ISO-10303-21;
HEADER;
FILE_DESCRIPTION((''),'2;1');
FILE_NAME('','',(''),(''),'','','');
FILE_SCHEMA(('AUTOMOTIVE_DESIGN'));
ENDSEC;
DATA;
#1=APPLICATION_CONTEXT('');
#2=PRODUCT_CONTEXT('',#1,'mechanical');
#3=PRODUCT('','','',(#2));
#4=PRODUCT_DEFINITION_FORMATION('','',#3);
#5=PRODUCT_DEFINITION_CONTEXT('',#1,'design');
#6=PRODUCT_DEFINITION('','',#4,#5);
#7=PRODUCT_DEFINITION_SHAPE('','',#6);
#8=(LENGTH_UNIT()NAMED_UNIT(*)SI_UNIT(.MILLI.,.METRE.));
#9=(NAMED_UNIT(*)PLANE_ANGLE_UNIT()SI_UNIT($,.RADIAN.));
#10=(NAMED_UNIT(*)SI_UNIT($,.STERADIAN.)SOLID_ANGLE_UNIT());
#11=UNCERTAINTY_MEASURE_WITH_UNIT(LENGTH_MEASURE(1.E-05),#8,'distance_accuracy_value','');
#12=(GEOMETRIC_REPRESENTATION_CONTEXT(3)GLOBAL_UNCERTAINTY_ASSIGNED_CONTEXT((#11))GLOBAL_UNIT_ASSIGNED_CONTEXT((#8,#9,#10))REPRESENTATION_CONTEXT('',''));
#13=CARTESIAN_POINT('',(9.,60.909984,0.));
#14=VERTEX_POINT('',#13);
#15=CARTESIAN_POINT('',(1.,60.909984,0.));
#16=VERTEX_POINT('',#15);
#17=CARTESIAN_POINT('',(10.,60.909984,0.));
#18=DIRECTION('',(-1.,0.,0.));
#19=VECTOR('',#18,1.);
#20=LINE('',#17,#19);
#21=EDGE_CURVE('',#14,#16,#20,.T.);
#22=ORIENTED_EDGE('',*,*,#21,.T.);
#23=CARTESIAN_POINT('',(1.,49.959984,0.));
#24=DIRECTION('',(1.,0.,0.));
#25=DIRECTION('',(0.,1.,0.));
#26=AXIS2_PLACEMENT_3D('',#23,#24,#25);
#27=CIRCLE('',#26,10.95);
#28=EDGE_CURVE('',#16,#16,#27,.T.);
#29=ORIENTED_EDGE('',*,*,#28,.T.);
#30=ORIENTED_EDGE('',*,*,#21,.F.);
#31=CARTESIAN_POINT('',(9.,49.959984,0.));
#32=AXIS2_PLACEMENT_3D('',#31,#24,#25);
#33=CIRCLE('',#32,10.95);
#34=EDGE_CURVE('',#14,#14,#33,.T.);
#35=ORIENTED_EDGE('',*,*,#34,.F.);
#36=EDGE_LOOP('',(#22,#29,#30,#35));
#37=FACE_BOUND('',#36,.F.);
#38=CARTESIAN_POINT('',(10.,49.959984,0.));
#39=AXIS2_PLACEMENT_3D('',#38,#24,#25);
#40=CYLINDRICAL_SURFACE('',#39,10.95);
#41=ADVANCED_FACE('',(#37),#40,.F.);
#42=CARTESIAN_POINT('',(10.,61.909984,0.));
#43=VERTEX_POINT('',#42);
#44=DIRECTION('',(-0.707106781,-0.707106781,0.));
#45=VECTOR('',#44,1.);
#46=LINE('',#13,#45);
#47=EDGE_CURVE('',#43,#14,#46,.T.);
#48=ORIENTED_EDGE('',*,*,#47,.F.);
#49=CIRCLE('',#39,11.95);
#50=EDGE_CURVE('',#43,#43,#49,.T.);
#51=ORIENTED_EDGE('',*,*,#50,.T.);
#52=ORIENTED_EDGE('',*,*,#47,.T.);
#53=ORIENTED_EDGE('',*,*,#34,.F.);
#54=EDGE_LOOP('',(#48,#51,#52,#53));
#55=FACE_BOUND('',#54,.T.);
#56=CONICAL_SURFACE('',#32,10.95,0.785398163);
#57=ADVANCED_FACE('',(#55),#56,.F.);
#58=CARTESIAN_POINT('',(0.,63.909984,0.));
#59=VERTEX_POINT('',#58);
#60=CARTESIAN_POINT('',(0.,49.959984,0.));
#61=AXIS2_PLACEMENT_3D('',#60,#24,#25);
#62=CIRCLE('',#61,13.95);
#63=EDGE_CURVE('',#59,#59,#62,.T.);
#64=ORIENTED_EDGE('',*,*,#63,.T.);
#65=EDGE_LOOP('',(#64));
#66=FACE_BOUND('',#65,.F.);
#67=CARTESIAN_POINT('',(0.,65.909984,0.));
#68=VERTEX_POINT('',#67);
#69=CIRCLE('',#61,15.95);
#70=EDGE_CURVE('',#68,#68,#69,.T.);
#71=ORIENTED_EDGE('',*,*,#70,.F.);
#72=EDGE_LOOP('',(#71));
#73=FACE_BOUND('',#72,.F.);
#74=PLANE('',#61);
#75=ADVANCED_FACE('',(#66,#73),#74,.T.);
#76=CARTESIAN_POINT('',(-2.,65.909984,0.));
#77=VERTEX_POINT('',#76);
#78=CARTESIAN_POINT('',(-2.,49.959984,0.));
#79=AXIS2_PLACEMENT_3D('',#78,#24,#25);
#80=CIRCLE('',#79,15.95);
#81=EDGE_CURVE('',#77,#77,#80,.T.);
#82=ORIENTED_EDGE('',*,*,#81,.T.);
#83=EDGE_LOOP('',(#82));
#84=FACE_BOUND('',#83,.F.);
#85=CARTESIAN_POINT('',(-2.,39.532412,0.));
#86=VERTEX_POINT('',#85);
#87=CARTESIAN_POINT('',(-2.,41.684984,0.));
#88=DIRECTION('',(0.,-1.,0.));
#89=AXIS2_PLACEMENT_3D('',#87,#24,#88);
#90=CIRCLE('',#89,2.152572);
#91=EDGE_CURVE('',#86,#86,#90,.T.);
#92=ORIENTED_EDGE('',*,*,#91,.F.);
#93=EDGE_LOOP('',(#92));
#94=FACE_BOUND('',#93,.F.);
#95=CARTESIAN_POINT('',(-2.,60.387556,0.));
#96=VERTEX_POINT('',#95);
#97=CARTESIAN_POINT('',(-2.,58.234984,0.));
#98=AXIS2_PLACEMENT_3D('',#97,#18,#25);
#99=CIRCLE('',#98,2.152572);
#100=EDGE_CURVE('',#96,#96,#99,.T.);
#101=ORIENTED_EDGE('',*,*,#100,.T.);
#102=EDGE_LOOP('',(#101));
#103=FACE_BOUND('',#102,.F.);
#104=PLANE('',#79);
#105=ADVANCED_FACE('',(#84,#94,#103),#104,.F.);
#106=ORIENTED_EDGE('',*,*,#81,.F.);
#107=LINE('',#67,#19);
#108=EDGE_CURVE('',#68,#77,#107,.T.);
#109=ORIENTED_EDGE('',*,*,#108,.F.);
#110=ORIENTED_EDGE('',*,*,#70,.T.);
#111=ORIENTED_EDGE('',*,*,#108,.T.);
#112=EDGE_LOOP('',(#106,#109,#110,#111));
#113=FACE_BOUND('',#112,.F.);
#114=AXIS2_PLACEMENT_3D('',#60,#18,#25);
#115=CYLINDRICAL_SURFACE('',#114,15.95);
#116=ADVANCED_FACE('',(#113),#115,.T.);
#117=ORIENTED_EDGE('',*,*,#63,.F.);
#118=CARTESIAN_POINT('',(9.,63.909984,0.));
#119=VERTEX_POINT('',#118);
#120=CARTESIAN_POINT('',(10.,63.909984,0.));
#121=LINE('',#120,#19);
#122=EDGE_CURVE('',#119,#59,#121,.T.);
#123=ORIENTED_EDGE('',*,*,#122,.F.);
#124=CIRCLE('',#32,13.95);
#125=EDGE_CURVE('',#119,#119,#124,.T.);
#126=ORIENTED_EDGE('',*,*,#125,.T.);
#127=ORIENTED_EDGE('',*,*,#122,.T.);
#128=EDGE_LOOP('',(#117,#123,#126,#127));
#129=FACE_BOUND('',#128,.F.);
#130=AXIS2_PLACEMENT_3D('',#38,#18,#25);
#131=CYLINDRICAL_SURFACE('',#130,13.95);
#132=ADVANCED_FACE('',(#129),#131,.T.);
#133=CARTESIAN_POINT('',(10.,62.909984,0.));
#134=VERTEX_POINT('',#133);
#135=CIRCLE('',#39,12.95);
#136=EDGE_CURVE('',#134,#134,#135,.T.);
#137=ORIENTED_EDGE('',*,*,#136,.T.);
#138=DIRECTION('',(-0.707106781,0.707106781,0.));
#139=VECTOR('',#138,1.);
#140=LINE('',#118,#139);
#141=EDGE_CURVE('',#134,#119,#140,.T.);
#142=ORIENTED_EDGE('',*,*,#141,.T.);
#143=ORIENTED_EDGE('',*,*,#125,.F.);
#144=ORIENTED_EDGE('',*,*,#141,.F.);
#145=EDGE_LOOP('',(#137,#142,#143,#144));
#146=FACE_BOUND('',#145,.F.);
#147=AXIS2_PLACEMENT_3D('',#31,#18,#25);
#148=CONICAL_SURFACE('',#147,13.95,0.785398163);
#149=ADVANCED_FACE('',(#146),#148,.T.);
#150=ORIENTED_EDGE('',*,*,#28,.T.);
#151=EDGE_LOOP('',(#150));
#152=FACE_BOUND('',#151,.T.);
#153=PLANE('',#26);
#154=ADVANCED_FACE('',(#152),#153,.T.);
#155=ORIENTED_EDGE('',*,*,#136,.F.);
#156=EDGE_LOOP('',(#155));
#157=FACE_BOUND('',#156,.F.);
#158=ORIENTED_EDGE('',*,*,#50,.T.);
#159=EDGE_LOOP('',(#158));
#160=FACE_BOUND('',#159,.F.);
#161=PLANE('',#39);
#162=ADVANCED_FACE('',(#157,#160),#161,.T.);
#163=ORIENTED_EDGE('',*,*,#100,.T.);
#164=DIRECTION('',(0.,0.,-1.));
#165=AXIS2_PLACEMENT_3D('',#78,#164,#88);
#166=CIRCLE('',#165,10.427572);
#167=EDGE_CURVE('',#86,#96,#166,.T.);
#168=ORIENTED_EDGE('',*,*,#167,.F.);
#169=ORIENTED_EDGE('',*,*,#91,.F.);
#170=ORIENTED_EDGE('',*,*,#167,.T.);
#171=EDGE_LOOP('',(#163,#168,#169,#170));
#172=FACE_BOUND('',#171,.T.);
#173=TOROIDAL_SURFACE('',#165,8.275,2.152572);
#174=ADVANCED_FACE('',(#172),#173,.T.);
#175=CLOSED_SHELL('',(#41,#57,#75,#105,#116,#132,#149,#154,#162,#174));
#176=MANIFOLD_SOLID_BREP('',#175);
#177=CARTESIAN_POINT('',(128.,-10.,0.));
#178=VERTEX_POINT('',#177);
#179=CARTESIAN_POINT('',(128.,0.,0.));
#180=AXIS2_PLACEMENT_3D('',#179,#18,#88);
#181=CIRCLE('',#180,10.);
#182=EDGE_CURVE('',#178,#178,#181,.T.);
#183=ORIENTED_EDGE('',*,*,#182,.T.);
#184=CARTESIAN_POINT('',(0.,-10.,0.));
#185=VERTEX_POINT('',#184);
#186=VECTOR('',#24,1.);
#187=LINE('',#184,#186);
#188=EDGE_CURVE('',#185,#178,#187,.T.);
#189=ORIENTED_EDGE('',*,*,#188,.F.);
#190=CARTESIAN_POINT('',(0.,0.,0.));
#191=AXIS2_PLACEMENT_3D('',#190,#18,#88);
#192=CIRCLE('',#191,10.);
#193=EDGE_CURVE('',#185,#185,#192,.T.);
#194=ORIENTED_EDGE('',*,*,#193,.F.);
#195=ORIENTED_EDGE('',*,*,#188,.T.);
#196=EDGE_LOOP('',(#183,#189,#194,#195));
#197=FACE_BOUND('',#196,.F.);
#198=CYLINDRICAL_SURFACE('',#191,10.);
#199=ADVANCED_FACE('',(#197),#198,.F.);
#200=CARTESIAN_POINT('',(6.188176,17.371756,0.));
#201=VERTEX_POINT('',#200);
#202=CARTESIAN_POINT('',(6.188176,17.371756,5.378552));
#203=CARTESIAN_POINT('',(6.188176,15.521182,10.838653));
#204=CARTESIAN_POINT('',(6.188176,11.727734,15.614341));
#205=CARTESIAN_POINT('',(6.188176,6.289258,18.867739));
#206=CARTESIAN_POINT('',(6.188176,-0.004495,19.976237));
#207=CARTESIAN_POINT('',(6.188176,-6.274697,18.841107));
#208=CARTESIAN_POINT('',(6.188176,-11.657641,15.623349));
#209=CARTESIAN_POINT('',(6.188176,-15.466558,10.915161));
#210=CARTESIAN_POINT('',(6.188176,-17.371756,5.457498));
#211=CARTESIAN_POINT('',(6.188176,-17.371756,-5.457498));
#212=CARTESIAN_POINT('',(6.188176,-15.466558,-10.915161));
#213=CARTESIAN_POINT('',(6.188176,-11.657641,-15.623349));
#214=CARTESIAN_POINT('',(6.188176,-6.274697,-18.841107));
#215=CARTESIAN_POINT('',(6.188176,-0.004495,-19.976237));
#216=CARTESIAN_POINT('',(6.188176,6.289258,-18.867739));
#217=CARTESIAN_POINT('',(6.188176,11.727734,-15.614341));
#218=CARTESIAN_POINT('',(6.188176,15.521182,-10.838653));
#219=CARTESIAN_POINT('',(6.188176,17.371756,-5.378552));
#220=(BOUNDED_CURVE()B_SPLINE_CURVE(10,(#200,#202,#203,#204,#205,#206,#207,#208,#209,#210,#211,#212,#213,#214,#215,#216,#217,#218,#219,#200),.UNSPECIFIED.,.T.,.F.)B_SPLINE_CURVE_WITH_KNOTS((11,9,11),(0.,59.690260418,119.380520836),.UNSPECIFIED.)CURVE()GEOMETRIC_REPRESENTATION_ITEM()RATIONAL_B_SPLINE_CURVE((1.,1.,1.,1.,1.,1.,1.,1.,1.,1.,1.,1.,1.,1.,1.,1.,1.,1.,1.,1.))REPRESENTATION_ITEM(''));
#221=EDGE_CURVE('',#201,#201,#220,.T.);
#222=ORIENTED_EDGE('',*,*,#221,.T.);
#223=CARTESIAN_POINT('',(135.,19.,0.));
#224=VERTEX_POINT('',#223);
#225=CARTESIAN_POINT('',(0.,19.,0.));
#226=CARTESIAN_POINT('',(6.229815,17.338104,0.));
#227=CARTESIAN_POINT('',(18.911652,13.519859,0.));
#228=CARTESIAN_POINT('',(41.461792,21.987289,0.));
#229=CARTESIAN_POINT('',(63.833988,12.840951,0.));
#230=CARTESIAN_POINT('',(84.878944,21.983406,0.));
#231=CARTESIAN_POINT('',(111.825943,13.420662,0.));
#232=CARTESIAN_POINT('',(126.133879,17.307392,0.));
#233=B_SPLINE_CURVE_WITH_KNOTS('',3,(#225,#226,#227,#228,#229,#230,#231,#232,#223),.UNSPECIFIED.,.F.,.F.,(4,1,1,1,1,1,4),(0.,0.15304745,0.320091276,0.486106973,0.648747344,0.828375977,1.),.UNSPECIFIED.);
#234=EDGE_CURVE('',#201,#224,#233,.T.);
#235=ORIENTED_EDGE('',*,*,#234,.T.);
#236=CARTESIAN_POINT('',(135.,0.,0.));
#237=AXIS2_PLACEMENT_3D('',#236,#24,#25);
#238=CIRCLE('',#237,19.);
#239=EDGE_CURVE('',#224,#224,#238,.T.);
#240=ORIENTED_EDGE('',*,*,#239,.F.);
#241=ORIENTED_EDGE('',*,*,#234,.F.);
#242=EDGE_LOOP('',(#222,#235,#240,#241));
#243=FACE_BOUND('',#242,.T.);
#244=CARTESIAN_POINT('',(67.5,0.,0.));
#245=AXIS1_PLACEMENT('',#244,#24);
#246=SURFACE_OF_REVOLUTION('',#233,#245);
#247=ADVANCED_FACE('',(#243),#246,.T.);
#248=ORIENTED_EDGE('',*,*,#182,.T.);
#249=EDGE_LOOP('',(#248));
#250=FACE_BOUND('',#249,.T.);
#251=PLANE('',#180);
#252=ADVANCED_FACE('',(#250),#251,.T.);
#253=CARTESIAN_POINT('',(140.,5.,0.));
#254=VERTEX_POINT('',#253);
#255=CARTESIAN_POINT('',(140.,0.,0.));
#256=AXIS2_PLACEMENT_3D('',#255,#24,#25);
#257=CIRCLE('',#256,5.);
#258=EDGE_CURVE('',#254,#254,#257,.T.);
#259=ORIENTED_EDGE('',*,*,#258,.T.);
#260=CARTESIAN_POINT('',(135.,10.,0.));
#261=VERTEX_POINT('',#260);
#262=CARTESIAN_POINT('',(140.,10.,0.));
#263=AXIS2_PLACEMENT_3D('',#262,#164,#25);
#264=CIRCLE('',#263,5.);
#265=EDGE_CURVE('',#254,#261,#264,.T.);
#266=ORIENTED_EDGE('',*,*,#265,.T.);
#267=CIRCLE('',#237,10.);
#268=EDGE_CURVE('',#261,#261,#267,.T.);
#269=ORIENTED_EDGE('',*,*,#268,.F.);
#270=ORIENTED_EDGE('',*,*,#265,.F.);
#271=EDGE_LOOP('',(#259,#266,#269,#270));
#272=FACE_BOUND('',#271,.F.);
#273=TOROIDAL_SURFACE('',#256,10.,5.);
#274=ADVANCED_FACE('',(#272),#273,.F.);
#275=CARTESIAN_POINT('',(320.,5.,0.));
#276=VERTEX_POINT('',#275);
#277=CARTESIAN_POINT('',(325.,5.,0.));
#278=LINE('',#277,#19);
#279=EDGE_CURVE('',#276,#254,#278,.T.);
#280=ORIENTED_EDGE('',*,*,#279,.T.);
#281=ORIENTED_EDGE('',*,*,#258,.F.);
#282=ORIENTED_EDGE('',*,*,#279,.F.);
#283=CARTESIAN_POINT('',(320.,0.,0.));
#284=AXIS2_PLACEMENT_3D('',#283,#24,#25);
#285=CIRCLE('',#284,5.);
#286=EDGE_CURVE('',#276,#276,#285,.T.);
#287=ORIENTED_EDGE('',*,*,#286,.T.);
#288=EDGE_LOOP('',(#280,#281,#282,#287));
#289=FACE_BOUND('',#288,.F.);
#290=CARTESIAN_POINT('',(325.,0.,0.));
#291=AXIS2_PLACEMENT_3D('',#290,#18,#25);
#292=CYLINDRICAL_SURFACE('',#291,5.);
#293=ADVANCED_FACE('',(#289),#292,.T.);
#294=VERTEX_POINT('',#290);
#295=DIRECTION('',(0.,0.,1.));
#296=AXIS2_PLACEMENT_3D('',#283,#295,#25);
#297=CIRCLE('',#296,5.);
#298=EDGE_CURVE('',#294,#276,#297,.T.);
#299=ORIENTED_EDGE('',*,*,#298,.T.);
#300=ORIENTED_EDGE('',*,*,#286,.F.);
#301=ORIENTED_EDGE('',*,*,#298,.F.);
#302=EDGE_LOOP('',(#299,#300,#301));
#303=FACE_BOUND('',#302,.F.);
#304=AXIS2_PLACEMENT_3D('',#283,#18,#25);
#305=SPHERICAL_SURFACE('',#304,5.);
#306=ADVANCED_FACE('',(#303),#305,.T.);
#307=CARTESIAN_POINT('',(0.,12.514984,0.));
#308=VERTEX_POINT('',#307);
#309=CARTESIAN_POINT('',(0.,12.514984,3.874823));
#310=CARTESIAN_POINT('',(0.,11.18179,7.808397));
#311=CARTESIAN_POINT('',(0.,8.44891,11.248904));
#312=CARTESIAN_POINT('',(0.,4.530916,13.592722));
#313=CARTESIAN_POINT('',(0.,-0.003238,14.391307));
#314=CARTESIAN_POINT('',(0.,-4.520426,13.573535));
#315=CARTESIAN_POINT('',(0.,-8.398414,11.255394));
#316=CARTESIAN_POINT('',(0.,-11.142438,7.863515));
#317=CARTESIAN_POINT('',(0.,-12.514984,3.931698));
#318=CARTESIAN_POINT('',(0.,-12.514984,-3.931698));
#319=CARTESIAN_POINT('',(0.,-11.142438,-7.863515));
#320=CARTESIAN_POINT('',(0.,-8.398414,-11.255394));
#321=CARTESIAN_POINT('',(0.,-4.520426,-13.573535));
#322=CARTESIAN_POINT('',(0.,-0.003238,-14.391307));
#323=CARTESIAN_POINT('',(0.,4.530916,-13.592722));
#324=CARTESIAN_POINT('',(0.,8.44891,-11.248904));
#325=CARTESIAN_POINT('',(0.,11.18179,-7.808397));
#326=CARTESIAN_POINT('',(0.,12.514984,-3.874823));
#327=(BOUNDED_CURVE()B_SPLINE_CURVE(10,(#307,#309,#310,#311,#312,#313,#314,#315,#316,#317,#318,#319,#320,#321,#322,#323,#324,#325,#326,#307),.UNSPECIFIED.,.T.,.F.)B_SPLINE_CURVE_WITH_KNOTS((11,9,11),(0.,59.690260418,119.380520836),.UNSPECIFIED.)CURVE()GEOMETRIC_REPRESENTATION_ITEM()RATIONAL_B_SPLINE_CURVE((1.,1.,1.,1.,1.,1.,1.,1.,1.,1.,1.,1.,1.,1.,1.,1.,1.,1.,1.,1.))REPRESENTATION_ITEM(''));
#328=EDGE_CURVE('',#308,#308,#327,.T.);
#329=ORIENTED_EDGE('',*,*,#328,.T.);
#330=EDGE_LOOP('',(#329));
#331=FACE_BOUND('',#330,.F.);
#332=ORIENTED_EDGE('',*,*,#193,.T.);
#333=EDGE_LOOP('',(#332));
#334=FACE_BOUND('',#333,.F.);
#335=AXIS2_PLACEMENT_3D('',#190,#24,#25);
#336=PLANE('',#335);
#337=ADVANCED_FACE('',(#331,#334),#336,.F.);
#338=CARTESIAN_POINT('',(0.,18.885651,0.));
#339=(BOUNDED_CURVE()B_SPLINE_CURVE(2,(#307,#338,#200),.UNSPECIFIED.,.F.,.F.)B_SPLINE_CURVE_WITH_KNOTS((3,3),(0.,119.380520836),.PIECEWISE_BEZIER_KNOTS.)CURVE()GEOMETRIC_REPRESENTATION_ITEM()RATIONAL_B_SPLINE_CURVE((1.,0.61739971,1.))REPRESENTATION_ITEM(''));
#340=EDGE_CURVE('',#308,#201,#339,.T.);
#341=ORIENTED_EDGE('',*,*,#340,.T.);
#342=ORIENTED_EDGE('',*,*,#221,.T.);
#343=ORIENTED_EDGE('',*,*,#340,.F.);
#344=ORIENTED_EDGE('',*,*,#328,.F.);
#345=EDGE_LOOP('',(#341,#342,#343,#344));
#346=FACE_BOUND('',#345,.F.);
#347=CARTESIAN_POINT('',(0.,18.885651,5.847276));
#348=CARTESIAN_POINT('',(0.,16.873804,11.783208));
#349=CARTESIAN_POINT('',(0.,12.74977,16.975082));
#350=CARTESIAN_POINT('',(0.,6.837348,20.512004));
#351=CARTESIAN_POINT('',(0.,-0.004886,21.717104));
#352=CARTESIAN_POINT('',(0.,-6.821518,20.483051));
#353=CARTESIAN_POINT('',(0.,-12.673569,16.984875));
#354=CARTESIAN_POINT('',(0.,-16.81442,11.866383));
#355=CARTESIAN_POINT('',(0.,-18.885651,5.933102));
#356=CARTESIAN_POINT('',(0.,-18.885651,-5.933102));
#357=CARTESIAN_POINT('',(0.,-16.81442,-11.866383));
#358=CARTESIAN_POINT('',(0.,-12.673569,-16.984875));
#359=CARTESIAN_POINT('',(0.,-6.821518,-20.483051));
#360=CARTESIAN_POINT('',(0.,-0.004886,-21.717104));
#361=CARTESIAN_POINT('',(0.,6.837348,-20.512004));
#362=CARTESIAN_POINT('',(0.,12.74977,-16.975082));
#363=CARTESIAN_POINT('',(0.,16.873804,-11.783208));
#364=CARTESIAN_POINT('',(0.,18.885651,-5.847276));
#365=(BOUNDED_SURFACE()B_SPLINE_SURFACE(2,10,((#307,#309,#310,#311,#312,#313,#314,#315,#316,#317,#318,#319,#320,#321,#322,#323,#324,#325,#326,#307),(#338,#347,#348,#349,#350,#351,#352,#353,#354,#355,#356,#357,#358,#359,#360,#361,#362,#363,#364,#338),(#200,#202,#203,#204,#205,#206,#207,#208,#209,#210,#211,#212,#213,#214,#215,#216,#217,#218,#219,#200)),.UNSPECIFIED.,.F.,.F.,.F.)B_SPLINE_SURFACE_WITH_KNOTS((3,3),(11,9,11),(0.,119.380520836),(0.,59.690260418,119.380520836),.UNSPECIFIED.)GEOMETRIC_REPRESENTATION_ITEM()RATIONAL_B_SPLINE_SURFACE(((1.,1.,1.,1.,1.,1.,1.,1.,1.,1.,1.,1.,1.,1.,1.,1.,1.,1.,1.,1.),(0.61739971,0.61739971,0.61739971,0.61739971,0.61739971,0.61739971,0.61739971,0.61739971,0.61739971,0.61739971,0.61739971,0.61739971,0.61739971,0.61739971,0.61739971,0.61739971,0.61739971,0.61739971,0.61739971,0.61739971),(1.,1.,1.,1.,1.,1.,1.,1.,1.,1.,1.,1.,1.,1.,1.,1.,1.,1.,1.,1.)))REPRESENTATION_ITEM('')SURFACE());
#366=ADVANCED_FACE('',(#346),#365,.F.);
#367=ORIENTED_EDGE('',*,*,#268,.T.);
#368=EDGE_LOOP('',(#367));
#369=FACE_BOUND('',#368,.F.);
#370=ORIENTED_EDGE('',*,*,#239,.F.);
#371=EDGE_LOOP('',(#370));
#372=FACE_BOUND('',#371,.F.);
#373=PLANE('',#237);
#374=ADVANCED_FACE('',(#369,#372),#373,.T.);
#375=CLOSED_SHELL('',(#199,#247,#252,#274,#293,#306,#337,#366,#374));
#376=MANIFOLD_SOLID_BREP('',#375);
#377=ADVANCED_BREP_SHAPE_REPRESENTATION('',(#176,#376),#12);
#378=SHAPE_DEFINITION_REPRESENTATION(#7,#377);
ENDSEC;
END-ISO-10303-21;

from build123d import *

# Parameters (mm, degrees)
F2_R      = 5
F3_R      = 10
F4_DEPTH  = 128
F9_R      = 10.95
F10_DEPTH = 9
F11_SIZE  = 1


# Not quite as in the source:
# - a feature of the source that left no trace in its solid (it failed there, or was rolled back) is left out


with BuildPart() as f1:
    # F0 (on Top) → F1 (revolve)
    with BuildSketch(Plane.XY):
        with BuildLine():
            Line((0, 19), (0, 0))
            Line((0, 0), (135, 0))
            Line((135, 0), (325, 0))
            Line((325, 0), (325, 5))
            Line((325, 5), (135, 5))
            Line((135, 5), (135, 19))
            add(Edge.make_bspline(
                [(0, 19), (6.2298148154, 17.3381037384), (18.9116523982, 13.5198586362), (41.4617916208, 21.987289281), (63.8339880536, 12.8409507176), (84.8789443524, 21.983405638), (111.8259427397, 13.4206624804), (126.1338785408, 17.3073923453), (135, 19)],
                knots=[0, 0, 0, 0, 0.1530474504, 0.3200912758, 0.4861069731, 0.6487473436, 0.8283759765, 1, 1, 1, 1], degree=3))
        make_face()
    revolve(axis=Axis((67.5, 0, 0), (1, 0, 0)))

    # F2
    f2_edges = [f1.edges().sort_by_distance(p)[0] for p in [
        (325, -5, 0),
        (135, -5, 0),
        (230, 5, 0),
        (0, -19, 0),
    ]]
    fillet(f2_edges, radius=F2_R)

    # F3 (on face) → F4 (cut)
    with BuildSketch(Plane(origin=(0, 0, 0), x_dir=(0, -1, 0), z_dir=(-1, 0, 0))):
        Circle(F3_R)
    extrude(amount=-F4_DEPTH, mode=Mode.SUBTRACT)


with BuildPart() as f6:
    # F5 (on Top) → F6 (revolve)
    with BuildSketch(Plane.XY):
        Polygon((-2, 49.9599839872), (0, 49.9599839872), (10, 49.9599839872), (10, 63.9099839872), (0, 63.9099839872), (0, 65.9099839872), (-2, 65.9099839872), (-2, 58.2169018066), align=None)
    revolve(axis=Axis((-1, 49.9599839872, 0), (1, 0, 0)))

    # F8: sweep along a path in F5
    with BuildLine(Plane.XY) as f8_path:
        ThreePointArc((-2, 41.7030661678), (-10.2569178194, 49.9599839872), (-2, 58.2169018066))
    # F7 (on face) → F8 (sweep)
    with BuildSketch(Plane(origin=(-2, 0, 0), x_dir=(0, -1, 0), z_dir=(-1, 0, 0))):
        with BuildLine():
            ThreePointArc((-43.8375558203, 0), (-41.6849839872, -2.1525718331), (-39.5324121541, 0))
            ThreePointArc((-39.5324121541, 0), (-41.6849839872, 2.1525718331), (-43.8375558203, 0))
        make_face()
    sweep(path=f8_path.line)

    # F9 (on face) → F10 (cut)
    with BuildSketch(Plane.YZ.offset(10)):
        with Locations((49.9599839872, 0)):
            Circle(F9_R)
    extrude(amount=-F10_DEPTH, mode=Mode.SUBTRACT)

    # F11
    f11_edges = [f6.edges().sort_by_distance(p)[0] for p in [
        (10, 36.009984, 0),
        (10, 39.009984, 0),
    ]]
    chamfer(f11_edges, length=F11_SIZE)


solid = Compound([f1.part, f6.part])
